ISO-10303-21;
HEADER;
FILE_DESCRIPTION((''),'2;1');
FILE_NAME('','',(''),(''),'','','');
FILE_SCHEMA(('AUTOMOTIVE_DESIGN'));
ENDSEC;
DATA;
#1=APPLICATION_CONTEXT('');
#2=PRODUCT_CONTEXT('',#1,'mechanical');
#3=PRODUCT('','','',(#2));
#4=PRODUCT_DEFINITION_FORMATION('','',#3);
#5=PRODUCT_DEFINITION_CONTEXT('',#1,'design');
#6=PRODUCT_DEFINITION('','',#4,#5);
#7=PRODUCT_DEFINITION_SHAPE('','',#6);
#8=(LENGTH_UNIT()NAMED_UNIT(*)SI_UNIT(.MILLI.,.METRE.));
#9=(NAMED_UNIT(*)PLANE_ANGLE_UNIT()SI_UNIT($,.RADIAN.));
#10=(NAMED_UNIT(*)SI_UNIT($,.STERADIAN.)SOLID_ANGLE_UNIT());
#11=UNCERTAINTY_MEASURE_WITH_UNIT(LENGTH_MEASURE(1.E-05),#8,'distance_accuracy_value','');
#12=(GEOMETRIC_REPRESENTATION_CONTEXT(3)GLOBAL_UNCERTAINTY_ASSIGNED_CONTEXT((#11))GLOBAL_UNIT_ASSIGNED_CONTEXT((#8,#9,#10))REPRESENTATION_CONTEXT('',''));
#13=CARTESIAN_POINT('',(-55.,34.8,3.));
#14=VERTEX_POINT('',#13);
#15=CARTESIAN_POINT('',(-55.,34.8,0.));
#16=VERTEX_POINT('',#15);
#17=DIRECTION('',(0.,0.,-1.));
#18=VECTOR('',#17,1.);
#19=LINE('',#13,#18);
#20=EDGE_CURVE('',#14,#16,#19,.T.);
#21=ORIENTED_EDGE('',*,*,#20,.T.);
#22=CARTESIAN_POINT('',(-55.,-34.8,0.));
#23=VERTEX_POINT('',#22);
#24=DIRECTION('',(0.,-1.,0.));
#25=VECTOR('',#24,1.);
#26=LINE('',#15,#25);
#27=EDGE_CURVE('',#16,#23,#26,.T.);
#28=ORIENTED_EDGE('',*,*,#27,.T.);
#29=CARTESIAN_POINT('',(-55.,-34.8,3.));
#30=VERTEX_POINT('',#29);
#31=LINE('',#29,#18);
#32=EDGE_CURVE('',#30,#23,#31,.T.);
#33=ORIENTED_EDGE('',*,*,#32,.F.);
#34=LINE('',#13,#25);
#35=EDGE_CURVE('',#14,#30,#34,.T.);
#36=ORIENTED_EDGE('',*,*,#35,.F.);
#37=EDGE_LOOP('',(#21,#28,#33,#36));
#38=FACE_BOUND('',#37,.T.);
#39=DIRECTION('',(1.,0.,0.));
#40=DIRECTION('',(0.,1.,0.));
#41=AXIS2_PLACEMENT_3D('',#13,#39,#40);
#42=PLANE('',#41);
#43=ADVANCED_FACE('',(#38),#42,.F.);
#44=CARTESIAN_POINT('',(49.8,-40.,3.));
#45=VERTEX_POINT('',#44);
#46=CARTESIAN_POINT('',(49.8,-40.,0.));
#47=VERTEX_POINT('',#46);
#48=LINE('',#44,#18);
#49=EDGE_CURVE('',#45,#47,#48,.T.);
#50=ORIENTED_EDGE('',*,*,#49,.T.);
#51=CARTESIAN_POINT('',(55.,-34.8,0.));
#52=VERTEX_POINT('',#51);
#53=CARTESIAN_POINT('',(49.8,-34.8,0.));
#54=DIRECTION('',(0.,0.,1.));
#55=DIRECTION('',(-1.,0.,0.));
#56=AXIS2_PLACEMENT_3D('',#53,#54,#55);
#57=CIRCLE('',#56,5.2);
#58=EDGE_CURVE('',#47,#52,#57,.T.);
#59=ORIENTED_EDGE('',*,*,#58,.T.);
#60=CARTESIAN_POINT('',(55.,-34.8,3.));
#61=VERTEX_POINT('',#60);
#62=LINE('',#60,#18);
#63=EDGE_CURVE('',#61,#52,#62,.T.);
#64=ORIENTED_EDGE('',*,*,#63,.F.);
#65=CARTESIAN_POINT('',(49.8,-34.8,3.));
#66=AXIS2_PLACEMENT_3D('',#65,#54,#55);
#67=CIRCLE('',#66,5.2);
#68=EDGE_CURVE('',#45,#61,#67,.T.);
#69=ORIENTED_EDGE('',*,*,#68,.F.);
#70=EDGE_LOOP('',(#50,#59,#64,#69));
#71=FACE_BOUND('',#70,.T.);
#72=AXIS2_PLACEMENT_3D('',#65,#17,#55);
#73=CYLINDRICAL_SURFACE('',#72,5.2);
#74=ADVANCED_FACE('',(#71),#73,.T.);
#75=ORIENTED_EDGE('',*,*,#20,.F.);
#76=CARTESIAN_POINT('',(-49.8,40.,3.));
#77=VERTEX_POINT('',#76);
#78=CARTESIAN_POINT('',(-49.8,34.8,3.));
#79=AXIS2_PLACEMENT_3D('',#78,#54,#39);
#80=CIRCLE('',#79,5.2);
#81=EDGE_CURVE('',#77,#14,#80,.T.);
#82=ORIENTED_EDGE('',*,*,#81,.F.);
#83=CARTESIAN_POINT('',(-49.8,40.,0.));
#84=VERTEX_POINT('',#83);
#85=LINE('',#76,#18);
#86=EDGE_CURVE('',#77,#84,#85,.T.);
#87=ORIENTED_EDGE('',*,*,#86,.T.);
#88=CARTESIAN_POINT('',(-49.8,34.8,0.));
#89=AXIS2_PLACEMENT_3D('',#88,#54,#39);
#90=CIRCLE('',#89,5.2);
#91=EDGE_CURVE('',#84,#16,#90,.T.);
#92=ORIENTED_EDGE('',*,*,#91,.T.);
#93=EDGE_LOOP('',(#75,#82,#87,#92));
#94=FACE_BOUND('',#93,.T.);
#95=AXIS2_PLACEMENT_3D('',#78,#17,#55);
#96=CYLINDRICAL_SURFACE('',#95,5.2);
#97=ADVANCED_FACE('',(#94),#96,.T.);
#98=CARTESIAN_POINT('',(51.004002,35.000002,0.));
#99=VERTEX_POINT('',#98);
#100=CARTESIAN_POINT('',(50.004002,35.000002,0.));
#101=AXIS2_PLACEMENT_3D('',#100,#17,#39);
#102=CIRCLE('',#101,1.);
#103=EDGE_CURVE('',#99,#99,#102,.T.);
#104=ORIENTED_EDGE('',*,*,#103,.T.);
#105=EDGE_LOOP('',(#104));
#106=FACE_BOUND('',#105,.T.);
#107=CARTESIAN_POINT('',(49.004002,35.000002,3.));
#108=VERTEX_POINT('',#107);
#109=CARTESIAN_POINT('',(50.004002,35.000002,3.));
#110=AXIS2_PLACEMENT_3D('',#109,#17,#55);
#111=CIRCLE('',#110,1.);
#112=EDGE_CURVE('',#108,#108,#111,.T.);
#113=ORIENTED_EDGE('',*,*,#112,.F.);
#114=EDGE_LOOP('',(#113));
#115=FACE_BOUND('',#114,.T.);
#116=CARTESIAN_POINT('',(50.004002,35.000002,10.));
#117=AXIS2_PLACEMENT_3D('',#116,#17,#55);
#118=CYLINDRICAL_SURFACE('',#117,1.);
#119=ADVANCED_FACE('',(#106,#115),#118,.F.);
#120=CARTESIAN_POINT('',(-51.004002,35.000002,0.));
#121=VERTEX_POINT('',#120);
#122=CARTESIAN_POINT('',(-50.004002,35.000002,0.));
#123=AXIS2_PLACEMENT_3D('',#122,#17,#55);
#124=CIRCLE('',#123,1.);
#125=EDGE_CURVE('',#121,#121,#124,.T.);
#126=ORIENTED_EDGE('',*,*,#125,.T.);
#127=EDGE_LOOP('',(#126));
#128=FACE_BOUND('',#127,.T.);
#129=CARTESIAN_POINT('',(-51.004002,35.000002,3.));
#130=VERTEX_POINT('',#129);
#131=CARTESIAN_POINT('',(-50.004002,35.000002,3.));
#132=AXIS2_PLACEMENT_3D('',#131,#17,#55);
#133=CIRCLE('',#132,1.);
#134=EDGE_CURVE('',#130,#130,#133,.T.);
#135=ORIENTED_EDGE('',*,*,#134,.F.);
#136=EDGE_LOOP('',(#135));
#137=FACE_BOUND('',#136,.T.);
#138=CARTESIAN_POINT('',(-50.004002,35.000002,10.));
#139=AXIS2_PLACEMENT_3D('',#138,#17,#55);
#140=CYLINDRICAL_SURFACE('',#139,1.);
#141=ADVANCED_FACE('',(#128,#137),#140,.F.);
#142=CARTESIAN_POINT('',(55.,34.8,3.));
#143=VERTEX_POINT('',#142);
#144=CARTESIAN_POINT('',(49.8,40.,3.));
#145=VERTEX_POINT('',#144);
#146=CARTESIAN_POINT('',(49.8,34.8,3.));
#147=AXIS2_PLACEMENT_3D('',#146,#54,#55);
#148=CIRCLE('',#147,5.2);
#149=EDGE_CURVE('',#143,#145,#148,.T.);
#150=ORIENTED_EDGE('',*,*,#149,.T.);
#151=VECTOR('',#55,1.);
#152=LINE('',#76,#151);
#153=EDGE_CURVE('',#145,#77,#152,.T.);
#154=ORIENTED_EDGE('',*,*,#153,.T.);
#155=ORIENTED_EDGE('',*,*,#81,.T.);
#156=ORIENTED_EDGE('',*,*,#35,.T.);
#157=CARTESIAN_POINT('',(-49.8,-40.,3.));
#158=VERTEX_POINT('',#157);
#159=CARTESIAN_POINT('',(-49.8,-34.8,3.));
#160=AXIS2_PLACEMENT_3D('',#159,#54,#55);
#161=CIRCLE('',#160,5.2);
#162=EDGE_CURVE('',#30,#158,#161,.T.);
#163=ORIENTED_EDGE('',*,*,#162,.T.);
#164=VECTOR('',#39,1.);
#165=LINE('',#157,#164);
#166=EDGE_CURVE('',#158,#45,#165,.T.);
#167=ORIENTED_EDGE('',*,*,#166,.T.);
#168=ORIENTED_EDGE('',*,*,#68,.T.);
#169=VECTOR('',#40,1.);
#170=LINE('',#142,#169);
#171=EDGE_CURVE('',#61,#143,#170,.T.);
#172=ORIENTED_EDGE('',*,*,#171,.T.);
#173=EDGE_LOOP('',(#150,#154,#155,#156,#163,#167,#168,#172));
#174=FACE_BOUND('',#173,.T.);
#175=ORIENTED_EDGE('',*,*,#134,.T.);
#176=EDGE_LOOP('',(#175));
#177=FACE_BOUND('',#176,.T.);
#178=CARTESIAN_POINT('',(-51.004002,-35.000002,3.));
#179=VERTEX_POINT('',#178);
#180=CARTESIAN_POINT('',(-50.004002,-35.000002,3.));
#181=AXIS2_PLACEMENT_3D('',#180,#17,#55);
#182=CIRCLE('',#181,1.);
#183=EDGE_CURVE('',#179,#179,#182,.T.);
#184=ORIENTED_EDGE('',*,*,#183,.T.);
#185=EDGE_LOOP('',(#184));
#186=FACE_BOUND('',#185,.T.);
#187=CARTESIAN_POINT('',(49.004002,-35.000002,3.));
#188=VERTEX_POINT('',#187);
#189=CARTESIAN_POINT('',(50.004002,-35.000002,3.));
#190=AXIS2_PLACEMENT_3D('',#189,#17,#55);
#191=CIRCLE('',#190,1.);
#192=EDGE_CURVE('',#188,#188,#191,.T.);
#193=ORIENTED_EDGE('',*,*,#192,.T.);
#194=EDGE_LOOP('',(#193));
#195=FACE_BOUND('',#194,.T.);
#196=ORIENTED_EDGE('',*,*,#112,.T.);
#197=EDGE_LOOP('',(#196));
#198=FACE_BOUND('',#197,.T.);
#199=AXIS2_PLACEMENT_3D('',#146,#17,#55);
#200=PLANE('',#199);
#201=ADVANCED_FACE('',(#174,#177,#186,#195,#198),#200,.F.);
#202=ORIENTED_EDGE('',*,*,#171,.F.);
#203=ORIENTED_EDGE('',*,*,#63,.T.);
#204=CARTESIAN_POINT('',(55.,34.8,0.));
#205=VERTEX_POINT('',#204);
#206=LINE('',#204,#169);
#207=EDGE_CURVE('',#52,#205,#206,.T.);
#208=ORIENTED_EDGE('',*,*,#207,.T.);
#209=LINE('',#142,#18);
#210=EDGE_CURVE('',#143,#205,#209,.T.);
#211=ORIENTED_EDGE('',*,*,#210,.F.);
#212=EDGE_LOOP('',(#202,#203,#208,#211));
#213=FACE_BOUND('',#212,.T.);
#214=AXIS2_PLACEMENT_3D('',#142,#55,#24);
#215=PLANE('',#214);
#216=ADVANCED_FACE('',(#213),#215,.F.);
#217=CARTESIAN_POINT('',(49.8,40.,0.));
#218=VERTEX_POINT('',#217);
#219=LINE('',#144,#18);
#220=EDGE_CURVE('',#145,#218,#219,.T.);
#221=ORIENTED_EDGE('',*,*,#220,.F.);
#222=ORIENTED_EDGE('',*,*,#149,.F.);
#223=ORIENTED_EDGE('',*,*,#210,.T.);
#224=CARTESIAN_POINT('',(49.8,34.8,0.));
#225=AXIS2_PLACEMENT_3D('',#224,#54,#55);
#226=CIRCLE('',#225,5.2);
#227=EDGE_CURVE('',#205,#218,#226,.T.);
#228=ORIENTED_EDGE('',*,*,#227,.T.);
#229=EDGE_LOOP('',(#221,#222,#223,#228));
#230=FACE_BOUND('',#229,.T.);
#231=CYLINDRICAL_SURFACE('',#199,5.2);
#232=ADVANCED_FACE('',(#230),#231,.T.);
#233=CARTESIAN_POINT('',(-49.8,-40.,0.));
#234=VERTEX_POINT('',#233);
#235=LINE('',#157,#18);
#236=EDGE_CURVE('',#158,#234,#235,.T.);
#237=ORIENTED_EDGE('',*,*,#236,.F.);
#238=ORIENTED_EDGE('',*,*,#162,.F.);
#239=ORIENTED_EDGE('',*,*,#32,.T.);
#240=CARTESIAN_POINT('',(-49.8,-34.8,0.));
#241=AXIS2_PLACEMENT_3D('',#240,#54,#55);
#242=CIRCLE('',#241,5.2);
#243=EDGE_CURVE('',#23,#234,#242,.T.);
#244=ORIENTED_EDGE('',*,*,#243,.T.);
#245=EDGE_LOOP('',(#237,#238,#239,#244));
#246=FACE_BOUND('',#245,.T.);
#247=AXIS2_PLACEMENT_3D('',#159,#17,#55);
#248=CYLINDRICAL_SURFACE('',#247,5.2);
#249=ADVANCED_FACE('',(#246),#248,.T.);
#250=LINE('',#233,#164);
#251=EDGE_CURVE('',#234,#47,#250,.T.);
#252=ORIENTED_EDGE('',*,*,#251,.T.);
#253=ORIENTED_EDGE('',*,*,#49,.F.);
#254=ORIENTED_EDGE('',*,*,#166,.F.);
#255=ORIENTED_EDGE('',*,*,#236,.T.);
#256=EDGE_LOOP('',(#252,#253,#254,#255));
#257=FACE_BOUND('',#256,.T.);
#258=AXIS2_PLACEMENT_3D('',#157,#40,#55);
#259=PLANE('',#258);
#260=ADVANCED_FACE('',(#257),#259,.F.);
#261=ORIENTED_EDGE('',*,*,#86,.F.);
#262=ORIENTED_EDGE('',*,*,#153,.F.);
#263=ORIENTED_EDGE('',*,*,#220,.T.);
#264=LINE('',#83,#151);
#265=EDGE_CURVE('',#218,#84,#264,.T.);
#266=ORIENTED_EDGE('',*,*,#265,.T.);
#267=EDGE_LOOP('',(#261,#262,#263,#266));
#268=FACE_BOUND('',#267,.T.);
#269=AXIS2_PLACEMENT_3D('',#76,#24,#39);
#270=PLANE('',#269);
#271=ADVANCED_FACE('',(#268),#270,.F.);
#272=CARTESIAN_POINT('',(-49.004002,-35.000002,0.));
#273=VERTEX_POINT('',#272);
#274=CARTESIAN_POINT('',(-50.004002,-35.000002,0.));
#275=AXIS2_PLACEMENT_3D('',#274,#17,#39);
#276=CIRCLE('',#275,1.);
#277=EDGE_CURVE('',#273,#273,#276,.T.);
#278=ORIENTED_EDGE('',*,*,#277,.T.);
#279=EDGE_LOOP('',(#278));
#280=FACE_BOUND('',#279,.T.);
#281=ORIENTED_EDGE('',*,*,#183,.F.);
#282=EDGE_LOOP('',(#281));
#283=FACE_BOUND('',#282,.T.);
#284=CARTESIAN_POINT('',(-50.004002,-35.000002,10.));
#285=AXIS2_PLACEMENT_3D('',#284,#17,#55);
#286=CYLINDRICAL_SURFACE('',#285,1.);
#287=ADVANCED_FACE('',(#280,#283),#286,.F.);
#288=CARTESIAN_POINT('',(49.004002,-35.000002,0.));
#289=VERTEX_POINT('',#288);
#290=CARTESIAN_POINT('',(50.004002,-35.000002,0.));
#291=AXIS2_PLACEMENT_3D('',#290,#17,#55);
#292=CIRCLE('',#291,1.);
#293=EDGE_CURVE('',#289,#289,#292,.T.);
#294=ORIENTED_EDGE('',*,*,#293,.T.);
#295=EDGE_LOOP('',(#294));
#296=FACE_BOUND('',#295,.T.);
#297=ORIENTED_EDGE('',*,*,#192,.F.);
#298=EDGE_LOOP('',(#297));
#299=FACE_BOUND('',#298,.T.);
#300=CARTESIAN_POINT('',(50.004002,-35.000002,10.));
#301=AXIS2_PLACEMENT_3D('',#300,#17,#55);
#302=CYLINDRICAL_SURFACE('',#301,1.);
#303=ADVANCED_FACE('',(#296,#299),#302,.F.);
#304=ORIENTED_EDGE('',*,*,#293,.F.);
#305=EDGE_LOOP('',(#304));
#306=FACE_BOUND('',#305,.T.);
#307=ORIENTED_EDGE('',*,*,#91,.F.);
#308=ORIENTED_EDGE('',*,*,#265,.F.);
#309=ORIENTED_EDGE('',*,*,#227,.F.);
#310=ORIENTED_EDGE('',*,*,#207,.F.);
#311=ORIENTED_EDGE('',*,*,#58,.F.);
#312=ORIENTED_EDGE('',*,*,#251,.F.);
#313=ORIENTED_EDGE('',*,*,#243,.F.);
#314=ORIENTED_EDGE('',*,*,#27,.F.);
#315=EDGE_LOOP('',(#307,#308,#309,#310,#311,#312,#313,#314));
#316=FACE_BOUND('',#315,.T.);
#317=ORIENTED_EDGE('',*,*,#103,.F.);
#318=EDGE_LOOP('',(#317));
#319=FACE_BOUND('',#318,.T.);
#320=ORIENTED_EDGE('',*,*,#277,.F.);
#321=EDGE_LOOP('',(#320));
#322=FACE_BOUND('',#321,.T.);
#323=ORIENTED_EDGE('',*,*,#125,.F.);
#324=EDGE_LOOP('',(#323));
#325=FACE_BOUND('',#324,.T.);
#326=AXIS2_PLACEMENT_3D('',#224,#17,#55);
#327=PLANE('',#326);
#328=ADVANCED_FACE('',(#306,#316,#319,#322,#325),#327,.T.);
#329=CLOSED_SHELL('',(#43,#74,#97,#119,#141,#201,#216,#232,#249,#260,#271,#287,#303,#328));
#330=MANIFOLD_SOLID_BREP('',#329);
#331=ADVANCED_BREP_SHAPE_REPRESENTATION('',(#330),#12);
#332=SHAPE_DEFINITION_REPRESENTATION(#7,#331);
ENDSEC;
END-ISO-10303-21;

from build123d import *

# Parameters (mm, degrees)
BOSS_EXTRU_1_DEPTH = 3
PER_AGE1_OUTLINE_R = 1
PER_AGE1_DEPTH     = 3


# Read off the part's stored shape, not the designer's step: Perçage1
with BuildPart() as part:
    # Esquisse2 → Boss.-Extru.1 (new body)
    with BuildSketch(Plane.XY):
        with BuildLine():
            Line((-49.8, 40), (49.8, 40))
            ThreePointArc((49.8, 40), (53.476955262, 38.476955262), (55, 34.8))
            Line((55, 34.8), (55, -34.8))
            ThreePointArc((55, -34.8), (53.476955262, -38.476955262), (49.8, -40))
            Line((49.8, -40), (-49.8, -40))
            ThreePointArc((-49.8, -40), (-53.476955262, -38.476955262), (-55, -34.8))
            Line((-55, -34.8), (-55, 34.8))
            ThreePointArc((-55, 34.8), (-53.476955262, 38.476955262), (-49.8, 40))
        make_face()
    extrude(amount=BOSS_EXTRU_1_DEPTH)

    # Perçage1 outline → Perçage1 (cut)
    with BuildSketch(Plane.XY):
        with Locations((-50.004001665, 35.000001601)):
            Circle(PER_AGE1_OUTLINE_R)
        with Locations((-50.004001665, -35.000001601)):
            Circle(PER_AGE1_OUTLINE_R)
        with Locations((50.004001665, -35.000001601)):
            Circle(PER_AGE1_OUTLINE_R)
        with Locations((50.004001665, 35.000001601)):
            Circle(PER_AGE1_OUTLINE_R)
    extrude(amount=PER_AGE1_DEPTH, mode=Mode.SUBTRACT)


solid = part.part
